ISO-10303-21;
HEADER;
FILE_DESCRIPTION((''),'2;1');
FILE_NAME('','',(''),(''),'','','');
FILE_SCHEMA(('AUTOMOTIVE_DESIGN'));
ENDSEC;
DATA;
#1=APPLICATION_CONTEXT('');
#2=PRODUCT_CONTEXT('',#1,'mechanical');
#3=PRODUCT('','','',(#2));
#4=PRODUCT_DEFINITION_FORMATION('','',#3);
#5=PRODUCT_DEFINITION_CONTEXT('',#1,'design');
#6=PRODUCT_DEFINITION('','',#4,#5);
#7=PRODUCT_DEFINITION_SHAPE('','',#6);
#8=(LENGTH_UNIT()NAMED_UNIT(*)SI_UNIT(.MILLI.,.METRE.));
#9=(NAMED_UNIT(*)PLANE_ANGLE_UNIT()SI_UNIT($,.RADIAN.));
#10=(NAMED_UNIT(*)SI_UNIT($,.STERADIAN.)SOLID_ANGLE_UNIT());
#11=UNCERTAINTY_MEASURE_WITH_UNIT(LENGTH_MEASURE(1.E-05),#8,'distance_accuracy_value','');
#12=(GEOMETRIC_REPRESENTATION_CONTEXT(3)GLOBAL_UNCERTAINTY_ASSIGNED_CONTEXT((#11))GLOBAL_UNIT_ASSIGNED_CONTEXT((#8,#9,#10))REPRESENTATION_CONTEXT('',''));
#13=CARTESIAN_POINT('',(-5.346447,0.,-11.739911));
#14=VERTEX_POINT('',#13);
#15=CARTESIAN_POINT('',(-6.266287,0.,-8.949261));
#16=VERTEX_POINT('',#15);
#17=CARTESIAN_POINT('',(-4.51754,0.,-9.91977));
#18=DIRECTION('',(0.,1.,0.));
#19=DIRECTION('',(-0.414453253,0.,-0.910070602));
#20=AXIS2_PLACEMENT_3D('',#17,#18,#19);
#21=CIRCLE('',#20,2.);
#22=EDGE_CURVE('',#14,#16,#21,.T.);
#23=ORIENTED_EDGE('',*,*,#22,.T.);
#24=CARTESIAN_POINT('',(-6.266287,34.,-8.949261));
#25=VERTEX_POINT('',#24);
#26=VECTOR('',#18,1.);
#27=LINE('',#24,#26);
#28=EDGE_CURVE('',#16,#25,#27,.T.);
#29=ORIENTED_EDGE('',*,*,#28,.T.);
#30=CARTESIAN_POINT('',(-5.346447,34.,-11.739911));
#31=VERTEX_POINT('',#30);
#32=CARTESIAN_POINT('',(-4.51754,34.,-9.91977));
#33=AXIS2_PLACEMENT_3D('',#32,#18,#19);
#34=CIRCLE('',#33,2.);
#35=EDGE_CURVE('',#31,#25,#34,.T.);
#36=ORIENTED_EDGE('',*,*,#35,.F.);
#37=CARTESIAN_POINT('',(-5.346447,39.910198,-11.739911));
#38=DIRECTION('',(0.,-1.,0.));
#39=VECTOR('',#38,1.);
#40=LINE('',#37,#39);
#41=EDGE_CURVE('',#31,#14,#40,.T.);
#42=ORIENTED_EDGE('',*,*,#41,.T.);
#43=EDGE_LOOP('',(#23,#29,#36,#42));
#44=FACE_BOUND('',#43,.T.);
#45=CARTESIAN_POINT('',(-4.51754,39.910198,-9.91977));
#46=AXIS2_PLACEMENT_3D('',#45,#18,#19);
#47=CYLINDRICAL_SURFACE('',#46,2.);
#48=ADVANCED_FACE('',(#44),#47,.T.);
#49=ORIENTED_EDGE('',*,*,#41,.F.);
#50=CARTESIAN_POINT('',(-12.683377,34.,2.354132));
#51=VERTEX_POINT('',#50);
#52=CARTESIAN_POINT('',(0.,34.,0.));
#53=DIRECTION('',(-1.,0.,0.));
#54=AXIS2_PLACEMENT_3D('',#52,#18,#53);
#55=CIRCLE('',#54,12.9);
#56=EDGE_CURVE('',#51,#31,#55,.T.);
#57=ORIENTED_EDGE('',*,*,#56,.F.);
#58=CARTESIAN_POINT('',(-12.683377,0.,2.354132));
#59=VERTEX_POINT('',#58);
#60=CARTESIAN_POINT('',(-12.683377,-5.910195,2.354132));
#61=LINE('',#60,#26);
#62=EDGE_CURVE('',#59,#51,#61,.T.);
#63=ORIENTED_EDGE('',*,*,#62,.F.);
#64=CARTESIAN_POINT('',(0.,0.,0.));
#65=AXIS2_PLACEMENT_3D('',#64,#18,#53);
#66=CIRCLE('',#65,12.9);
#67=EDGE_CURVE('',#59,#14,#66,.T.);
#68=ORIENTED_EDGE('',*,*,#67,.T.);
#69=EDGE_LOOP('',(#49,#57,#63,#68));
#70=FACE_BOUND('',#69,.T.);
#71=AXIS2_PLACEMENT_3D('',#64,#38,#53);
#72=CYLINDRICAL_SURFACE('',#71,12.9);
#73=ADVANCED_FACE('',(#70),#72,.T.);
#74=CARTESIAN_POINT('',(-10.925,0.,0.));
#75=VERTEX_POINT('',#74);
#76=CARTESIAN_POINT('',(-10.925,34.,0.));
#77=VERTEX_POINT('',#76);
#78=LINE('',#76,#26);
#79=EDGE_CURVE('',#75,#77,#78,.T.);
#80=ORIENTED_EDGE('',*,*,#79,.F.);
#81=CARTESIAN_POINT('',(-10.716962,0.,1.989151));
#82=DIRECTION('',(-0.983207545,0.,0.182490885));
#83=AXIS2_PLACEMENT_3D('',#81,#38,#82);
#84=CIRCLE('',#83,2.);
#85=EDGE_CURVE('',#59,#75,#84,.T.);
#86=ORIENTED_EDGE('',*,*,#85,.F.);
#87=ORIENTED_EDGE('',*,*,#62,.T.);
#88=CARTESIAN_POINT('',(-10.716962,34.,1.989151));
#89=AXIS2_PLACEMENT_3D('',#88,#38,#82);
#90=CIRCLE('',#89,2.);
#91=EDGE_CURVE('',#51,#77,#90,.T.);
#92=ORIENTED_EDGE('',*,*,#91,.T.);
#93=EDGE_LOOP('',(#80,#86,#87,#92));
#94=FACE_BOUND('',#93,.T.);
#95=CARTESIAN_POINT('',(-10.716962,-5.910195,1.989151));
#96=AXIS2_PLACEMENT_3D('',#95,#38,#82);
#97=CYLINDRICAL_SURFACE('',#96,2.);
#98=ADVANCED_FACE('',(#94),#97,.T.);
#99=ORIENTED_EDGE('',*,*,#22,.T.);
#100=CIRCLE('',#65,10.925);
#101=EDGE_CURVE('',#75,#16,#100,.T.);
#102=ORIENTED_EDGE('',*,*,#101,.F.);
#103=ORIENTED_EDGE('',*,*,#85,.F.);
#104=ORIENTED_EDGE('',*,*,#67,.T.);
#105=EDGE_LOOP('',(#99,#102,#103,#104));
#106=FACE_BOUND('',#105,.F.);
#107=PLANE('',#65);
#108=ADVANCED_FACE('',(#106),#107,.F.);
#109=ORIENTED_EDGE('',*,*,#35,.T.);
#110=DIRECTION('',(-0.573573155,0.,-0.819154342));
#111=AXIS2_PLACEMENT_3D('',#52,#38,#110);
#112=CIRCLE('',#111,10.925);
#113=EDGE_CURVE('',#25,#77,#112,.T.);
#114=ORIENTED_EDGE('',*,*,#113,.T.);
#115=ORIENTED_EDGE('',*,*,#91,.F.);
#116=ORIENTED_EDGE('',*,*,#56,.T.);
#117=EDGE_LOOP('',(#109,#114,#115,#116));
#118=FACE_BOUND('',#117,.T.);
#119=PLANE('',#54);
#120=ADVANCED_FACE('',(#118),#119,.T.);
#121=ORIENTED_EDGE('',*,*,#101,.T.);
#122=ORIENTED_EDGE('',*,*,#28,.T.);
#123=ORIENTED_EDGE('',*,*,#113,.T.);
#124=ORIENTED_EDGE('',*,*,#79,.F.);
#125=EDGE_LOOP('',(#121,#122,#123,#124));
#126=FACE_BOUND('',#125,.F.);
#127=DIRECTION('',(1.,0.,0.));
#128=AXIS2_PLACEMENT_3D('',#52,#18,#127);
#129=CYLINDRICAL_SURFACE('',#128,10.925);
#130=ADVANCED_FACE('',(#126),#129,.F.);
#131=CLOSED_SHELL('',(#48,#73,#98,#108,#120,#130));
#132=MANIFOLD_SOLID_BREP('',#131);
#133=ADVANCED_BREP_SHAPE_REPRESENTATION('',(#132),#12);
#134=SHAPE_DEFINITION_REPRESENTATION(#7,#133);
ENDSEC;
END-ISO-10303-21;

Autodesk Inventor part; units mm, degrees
ref_plane "YZ Plane" through (0, 0, 0) normal (1, 0, 0) x (0, 1, 0)
ref_plane "XZ Plane" through (0, 0, 0) normal (0, 1, 0) x (-1, 0, 0)
ref_plane "XY Plane" through (0, 0, 0) normal (0, 0, 1) x (1, 0, 0)
sketch "Sketch1" plane through (0, 0, 0) normal (0, 1, 0) x (-1, 0, 0)
  circle A0 centre (0, 0) radius 12.9
  dimension "d0" = 25.8
extrude "Extrusion1" add sketch "Sketch1" along normal blind 34
sketch "Sketch2" plane through (0, 34, 0) normal (0, 1, 0) x (1, 0, 0)
  circle A0 centre (0, 0) radius 10.925
  dimension "d3" = 21.85
extrude "Extrusion2" cut sketch "Sketch2" against normal through all
sketch "Sketch3" plane through (0, 34, 0) normal (0, 1, 0) x (1, 0, 0)
  circle A0 centre (0, 0) radius 12.9 projected
  arc A1 (-7.3991, 10.5671) -> (-12.9, 0) centre (0, 0) ccw
  line L0 (0, 0) -> (-7.3991, 10.5671) construction
  line L1 (0, 0) -> (-12.9, 0) construction
  line L2 (-12.9, 0) -> (0, 0)
  line L3 (0, 0) -> (-7.3991, 10.5671)
  dimension "d6" = 55
extrude "Extrusion3" cut sketch "Sketch3" against normal through all contours L3 L2 A0 picked at (-5.6993, 6.3576)
fillet "Fillet1" radius 2 2 edges at (-12.9, 17, 0) (-7.3991, 17, -10.5671)
properties part number "flute-wrapper"
